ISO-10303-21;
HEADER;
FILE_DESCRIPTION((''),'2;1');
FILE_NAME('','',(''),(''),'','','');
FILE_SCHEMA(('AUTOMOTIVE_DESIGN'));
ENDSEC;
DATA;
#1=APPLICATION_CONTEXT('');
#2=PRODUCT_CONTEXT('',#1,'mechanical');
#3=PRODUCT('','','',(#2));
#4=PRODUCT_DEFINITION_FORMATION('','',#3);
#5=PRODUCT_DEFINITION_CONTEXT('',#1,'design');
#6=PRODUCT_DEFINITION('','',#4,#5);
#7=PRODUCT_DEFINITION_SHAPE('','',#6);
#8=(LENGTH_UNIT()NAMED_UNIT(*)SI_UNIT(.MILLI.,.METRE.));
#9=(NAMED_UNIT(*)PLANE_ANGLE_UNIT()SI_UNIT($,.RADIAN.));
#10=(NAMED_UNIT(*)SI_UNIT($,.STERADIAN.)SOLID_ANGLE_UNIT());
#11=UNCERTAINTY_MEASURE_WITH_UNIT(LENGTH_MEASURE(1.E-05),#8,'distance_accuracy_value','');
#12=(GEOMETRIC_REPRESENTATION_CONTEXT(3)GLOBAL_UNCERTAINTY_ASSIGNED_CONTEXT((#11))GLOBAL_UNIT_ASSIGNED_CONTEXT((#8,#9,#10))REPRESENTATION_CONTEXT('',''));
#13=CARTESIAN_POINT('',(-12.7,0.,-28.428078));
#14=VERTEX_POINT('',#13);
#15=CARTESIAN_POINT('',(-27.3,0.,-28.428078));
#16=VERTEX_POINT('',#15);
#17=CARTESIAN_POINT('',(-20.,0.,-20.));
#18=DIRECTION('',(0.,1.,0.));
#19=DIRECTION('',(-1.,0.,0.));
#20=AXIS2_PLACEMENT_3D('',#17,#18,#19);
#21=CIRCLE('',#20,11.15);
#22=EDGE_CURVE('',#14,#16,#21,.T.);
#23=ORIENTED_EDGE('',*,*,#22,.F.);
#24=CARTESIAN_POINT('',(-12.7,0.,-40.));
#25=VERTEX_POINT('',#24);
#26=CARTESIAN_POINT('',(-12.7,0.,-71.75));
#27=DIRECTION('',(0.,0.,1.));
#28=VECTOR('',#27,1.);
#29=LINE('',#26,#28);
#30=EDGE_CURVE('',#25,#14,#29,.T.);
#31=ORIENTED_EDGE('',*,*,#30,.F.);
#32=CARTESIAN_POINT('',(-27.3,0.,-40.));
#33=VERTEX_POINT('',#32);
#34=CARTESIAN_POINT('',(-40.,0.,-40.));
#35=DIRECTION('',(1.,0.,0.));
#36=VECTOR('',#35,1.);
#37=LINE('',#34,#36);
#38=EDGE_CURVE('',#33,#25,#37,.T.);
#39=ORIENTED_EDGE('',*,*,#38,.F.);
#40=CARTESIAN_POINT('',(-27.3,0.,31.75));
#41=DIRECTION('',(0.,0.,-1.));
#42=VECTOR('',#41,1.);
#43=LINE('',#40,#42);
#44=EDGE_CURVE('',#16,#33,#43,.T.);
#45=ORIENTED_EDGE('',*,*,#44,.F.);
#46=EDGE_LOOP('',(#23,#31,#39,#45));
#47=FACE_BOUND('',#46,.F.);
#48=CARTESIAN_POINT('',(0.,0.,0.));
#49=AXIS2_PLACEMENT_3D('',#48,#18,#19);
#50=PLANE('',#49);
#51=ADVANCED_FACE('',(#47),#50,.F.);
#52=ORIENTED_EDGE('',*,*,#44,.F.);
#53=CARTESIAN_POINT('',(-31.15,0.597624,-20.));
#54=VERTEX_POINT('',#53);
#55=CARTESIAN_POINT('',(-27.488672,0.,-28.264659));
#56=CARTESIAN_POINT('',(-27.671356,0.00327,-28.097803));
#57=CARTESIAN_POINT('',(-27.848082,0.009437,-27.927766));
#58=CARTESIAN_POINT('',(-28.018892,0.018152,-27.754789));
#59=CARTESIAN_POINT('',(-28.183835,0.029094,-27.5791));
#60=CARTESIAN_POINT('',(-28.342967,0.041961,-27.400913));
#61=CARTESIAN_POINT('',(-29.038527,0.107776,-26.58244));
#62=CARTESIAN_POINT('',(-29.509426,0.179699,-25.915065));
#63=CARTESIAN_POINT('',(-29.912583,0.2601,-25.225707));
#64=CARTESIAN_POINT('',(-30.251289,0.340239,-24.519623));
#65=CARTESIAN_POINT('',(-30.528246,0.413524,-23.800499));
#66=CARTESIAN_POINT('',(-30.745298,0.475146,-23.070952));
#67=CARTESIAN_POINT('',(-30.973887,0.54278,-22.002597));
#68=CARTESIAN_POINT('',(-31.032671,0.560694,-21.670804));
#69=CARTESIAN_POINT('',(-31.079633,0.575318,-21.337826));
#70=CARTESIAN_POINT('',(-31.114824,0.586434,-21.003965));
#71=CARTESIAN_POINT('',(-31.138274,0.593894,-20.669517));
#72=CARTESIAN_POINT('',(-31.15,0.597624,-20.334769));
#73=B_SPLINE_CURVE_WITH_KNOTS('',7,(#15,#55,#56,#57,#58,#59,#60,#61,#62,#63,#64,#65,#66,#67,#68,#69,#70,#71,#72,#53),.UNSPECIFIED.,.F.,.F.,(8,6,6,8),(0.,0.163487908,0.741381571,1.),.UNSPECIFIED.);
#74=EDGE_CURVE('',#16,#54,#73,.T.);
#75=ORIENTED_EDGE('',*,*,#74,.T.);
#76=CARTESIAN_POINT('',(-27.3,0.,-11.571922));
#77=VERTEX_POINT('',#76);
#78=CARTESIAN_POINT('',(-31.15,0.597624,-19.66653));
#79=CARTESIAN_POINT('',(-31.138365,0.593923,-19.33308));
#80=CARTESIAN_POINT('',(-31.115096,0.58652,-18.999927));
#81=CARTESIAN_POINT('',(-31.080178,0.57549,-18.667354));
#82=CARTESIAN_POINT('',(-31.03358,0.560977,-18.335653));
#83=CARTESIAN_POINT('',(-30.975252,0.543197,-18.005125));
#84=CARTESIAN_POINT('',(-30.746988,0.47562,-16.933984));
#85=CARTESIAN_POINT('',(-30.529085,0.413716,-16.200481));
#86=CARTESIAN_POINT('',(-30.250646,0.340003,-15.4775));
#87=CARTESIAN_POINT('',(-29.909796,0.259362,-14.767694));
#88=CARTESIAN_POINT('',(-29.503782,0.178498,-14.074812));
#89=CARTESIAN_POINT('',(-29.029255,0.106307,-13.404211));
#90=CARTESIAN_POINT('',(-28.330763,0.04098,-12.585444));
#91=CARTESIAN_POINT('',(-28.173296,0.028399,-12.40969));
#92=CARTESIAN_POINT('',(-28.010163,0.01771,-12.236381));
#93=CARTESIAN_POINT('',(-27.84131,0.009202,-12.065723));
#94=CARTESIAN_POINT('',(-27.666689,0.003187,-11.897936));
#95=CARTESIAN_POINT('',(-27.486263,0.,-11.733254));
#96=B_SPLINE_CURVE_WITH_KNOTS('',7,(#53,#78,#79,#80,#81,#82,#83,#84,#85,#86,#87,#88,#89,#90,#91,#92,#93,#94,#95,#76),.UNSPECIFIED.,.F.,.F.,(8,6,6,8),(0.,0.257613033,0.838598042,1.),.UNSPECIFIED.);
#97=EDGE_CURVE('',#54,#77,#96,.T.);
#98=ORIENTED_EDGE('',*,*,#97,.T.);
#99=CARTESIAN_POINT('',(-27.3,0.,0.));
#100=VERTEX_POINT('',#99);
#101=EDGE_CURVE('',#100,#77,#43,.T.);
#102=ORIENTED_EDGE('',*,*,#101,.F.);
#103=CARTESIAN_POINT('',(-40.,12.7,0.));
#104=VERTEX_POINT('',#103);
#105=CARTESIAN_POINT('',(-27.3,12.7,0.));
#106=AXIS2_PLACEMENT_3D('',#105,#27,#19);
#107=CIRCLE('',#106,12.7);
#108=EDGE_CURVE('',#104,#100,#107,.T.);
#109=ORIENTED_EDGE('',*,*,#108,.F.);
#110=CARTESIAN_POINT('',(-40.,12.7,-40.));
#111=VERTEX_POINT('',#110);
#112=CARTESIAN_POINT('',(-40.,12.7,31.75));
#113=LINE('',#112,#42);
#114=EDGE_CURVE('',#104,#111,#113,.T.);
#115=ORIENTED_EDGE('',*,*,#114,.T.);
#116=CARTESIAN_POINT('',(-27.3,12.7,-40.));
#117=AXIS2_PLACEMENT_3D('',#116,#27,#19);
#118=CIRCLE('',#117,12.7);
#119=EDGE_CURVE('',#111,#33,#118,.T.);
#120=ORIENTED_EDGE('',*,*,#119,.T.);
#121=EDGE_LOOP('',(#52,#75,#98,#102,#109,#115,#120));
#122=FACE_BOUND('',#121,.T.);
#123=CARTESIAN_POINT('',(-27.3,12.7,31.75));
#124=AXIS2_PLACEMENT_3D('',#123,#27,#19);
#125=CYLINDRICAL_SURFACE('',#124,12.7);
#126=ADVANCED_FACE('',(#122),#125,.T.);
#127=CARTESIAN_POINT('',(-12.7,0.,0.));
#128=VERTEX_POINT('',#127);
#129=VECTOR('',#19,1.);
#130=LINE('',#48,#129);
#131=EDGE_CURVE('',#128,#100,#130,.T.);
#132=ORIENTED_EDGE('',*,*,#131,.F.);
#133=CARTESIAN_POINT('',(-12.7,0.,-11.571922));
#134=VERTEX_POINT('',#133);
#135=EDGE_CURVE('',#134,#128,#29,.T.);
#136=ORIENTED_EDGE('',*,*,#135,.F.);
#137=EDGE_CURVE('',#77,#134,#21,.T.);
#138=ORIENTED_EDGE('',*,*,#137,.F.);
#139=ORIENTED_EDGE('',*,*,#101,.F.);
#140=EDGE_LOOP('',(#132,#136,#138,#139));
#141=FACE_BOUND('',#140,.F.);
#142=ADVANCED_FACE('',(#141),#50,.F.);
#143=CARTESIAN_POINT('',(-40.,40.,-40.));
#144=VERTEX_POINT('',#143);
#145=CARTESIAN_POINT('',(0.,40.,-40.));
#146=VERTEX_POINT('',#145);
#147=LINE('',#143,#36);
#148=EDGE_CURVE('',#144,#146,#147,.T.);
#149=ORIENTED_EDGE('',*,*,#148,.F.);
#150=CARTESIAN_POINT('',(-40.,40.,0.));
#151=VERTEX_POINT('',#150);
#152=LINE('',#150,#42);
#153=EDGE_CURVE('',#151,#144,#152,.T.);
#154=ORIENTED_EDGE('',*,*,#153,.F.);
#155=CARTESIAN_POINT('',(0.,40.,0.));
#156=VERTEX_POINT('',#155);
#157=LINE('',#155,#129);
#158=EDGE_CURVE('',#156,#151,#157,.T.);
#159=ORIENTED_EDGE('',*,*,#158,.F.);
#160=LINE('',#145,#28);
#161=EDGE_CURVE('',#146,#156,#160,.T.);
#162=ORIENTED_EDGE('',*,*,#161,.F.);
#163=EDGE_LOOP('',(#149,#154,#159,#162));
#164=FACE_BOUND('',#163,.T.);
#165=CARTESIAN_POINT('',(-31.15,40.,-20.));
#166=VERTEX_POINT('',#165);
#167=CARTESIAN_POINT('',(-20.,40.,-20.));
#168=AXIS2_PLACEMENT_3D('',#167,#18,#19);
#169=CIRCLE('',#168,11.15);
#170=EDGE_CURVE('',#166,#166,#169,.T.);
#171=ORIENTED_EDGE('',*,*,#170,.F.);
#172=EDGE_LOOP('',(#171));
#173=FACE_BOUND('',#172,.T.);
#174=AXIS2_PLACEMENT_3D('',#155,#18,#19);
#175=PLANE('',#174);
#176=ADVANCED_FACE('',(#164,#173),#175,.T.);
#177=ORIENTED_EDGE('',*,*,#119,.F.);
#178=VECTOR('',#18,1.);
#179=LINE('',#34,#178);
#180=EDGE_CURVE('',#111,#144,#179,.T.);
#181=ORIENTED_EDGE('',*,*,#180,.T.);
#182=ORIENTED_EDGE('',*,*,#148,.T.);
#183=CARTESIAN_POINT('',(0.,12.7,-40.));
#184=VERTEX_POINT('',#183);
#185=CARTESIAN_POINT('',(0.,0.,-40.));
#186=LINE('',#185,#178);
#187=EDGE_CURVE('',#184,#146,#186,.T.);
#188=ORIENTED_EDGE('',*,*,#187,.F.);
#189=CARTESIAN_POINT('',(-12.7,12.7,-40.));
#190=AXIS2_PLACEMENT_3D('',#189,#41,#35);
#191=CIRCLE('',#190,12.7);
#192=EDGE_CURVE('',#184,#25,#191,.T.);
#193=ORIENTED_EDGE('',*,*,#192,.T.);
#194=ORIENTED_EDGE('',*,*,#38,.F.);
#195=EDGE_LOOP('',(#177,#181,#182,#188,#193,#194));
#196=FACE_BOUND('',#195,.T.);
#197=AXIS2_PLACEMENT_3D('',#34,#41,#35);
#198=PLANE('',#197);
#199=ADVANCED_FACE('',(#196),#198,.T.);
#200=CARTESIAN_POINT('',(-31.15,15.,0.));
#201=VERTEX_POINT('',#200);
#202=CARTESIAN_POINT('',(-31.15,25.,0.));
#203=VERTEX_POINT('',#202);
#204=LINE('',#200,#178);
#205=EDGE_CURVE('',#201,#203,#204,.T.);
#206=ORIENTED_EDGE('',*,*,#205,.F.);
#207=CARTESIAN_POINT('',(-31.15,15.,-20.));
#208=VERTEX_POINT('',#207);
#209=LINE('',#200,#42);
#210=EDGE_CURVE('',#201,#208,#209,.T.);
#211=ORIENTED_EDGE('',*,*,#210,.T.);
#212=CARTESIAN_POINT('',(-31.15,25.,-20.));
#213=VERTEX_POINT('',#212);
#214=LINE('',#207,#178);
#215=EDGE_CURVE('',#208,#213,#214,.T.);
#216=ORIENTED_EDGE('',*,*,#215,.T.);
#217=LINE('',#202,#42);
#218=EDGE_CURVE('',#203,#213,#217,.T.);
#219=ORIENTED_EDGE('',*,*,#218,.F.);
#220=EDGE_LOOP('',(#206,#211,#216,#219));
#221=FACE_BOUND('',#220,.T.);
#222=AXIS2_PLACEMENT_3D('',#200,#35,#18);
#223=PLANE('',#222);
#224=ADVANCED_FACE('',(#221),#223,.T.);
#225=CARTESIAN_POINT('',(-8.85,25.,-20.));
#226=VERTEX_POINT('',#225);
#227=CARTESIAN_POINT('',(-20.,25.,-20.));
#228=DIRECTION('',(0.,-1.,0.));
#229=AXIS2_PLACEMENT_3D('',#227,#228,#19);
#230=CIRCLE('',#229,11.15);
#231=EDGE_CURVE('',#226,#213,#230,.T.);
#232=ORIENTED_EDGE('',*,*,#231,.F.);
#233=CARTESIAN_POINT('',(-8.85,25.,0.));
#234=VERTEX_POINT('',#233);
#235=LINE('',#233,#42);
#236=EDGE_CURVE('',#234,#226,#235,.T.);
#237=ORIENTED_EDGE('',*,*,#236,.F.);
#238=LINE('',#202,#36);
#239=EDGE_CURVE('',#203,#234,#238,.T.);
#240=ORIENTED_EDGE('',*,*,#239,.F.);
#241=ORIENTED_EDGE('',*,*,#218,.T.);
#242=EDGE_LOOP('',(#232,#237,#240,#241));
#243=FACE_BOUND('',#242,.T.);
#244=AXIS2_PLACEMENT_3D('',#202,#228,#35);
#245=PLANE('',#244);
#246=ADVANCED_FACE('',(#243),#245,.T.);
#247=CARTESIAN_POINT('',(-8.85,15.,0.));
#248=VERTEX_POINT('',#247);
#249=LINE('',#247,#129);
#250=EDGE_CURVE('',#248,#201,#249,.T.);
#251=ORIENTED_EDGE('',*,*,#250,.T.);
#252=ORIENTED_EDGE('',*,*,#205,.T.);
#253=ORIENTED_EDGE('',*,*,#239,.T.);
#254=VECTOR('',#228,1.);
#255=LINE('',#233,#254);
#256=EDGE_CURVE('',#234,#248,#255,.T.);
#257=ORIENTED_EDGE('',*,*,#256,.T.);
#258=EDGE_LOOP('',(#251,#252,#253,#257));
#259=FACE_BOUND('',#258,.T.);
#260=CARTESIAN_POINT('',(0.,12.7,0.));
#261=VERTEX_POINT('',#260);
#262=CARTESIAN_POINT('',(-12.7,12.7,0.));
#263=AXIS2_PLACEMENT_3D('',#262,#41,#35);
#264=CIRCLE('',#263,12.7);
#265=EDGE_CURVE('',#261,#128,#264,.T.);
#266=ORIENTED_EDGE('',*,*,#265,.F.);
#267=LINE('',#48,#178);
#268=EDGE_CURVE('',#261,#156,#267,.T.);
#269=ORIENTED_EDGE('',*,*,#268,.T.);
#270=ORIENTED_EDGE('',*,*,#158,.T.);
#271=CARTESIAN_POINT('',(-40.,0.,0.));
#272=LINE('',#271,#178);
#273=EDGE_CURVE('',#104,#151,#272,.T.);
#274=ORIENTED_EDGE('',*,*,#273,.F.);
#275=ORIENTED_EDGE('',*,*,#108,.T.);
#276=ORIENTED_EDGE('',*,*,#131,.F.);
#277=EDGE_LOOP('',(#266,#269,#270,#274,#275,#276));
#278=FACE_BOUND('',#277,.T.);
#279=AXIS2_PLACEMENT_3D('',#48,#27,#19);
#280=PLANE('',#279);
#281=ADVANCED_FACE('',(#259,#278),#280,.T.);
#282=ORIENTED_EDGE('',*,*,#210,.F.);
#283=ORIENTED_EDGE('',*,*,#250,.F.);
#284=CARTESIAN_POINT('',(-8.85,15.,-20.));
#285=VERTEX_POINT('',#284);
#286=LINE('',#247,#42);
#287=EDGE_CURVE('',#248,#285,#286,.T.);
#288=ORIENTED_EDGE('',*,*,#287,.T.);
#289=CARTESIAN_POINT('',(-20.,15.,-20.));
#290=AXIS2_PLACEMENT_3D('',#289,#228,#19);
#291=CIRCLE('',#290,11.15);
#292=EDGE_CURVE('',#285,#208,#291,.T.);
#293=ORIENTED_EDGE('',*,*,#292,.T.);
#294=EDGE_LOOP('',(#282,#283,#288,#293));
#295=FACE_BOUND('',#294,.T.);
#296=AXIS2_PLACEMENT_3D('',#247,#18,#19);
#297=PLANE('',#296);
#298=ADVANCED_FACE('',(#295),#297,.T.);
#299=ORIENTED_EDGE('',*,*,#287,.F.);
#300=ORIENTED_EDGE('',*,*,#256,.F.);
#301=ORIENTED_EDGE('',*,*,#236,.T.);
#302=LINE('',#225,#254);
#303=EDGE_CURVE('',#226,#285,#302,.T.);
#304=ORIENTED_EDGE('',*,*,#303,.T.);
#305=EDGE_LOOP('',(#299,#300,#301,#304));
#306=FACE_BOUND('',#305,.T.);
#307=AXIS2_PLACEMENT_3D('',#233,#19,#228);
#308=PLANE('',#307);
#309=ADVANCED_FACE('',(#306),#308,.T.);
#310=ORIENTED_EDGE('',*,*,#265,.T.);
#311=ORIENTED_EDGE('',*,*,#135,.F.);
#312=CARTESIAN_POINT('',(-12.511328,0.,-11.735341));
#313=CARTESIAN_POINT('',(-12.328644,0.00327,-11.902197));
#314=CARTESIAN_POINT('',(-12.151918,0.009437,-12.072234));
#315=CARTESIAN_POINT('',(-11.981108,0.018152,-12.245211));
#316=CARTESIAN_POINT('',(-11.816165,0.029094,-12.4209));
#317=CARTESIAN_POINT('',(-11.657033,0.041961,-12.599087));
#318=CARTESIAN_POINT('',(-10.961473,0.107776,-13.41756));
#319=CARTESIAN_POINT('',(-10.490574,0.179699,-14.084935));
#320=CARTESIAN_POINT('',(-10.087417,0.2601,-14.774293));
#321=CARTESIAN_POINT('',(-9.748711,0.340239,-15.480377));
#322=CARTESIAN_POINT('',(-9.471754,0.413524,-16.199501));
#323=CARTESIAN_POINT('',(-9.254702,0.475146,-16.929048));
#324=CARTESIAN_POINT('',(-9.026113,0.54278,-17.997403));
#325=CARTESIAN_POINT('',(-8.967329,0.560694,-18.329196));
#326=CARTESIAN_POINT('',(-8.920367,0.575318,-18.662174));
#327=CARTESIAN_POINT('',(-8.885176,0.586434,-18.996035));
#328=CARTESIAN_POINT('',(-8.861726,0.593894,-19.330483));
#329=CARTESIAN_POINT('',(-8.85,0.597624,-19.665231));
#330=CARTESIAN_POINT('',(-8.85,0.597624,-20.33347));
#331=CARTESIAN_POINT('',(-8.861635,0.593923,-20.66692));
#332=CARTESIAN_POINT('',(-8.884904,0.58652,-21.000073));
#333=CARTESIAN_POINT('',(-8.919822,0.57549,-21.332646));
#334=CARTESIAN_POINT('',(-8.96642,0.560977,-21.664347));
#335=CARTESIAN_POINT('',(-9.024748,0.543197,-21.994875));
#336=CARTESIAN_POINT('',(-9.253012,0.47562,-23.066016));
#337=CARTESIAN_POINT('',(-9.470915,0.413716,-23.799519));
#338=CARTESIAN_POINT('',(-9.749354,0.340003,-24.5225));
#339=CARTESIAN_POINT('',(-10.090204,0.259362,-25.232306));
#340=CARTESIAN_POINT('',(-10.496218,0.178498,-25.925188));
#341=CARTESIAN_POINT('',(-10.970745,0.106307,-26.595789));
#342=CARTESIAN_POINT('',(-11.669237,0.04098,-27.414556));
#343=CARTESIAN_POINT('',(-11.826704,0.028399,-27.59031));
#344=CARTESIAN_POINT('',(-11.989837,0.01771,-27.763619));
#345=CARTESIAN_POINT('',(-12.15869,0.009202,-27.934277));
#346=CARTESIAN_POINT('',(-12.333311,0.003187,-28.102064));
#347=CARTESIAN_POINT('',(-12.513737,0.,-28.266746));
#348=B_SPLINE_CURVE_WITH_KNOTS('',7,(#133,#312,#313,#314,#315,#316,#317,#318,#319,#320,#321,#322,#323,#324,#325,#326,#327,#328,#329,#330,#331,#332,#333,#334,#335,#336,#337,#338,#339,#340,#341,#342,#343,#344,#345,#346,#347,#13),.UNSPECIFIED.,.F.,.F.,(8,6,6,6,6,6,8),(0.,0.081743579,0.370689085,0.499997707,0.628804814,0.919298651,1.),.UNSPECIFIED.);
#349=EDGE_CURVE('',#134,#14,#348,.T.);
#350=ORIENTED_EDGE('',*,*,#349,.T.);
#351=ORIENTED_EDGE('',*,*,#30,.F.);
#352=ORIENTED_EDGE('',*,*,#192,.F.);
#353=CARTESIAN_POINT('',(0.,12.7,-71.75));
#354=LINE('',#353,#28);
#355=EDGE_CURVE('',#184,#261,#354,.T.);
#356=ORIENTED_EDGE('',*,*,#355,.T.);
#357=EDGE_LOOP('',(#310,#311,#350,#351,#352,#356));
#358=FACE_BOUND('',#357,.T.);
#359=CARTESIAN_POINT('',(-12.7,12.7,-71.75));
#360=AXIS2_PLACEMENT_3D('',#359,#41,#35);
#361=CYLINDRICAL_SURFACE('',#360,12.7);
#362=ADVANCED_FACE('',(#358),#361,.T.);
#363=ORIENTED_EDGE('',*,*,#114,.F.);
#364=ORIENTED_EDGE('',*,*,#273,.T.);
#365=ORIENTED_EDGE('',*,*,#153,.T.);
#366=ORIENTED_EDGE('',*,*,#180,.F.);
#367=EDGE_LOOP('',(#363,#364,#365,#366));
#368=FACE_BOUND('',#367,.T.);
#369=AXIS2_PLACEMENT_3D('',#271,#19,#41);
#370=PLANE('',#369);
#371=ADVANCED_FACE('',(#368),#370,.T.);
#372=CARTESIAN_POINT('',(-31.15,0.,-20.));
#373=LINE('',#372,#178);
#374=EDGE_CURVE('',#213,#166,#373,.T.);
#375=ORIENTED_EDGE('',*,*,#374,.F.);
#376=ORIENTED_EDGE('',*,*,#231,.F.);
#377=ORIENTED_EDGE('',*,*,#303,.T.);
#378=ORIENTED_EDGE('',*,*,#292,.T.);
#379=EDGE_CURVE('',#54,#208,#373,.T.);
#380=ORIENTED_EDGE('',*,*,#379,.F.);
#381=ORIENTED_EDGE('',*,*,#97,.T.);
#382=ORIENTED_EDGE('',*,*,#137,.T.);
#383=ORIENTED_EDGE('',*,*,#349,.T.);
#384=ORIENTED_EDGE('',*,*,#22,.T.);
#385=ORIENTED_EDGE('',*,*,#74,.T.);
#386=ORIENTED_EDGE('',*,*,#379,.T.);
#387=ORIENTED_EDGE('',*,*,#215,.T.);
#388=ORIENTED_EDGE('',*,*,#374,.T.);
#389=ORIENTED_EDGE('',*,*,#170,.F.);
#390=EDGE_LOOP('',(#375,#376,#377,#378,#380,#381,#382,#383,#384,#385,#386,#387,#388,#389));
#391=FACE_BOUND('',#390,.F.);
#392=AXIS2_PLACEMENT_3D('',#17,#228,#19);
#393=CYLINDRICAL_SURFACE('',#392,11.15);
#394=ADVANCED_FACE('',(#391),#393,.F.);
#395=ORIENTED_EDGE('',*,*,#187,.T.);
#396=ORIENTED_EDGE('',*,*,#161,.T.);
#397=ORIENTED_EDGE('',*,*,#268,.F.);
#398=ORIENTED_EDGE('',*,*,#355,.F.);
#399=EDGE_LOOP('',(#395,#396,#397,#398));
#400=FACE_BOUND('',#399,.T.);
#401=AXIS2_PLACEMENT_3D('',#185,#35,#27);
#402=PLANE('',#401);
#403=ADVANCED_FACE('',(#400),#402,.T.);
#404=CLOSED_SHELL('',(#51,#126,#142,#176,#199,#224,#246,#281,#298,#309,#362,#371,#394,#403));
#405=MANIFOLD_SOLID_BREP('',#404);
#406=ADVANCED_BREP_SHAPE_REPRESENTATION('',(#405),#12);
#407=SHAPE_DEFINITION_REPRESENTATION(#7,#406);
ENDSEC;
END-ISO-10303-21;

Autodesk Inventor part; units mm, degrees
ref_plane "YZ Plane" through (0, 0, 0) normal (1, 0, 0) x (0, 1, 0)
ref_plane "XZ Plane" through (0, 0, 0) normal (0, 1, 0) x (-1, 0, 0)
ref_plane "XY Plane" through (0, 0, 0) normal (0, 0, 1) x (1, 0, 0)
sketch "Sketch1" plane through (0, 0, 0) normal (0, 1, 0) x (-1, 0, 0)
  line L0 (0, 0) -> (40, 0)
  line L1 (40, 0) -> (40, -40)
  line L2 (40, -40) -> (0, -40)
  line L3 (0, -40) -> (0, 0)
  circle A0 centre (20, -20) radius 11.15
  dimension "d0" = 40
  dimension "d1" = 40
  dimension "d2" = 22.3
  dimension "d3" = 20
  dimension "d4" = 20
extrude "Extrusion1" add sketch "Sketch1" along normal blind 40
fillet "Fillet1" radius 12.7 2 edges at (0, 0, -20) (-40, 0, -20)
sketch "Sketch2" plane through (-40, 40, 0) normal (0, 0, 1) x (1, 0, 0)
  line L0 (8.85, -15) -> (31.15, -15)
  line L1 (31.15, -15) -> (31.15, -25)
  line L2 (31.15, -25) -> (8.85, -25)
  line L3 (8.85, -25) -> (8.85, -15)
  line L4 (8.85, -15) -> (31.15, -25) construction
  line L5 (31.15, -15) -> (8.85, -25) construction
  line L6 (40, -27.3) -> (40, 0) projected
  line L7 (27.3, -40) -> (12.7, -40) projected
  point P0 (40, -40)
  point P1 (20, -20)
  dimension "d8" = 20
  dimension "d9" = 22.3
  dimension "d10" = 10
  dimension "d11" = 15
extrude "Extrusion2" cut sketch "Sketch2" against normal blind 20
properties part number "YMountB"
